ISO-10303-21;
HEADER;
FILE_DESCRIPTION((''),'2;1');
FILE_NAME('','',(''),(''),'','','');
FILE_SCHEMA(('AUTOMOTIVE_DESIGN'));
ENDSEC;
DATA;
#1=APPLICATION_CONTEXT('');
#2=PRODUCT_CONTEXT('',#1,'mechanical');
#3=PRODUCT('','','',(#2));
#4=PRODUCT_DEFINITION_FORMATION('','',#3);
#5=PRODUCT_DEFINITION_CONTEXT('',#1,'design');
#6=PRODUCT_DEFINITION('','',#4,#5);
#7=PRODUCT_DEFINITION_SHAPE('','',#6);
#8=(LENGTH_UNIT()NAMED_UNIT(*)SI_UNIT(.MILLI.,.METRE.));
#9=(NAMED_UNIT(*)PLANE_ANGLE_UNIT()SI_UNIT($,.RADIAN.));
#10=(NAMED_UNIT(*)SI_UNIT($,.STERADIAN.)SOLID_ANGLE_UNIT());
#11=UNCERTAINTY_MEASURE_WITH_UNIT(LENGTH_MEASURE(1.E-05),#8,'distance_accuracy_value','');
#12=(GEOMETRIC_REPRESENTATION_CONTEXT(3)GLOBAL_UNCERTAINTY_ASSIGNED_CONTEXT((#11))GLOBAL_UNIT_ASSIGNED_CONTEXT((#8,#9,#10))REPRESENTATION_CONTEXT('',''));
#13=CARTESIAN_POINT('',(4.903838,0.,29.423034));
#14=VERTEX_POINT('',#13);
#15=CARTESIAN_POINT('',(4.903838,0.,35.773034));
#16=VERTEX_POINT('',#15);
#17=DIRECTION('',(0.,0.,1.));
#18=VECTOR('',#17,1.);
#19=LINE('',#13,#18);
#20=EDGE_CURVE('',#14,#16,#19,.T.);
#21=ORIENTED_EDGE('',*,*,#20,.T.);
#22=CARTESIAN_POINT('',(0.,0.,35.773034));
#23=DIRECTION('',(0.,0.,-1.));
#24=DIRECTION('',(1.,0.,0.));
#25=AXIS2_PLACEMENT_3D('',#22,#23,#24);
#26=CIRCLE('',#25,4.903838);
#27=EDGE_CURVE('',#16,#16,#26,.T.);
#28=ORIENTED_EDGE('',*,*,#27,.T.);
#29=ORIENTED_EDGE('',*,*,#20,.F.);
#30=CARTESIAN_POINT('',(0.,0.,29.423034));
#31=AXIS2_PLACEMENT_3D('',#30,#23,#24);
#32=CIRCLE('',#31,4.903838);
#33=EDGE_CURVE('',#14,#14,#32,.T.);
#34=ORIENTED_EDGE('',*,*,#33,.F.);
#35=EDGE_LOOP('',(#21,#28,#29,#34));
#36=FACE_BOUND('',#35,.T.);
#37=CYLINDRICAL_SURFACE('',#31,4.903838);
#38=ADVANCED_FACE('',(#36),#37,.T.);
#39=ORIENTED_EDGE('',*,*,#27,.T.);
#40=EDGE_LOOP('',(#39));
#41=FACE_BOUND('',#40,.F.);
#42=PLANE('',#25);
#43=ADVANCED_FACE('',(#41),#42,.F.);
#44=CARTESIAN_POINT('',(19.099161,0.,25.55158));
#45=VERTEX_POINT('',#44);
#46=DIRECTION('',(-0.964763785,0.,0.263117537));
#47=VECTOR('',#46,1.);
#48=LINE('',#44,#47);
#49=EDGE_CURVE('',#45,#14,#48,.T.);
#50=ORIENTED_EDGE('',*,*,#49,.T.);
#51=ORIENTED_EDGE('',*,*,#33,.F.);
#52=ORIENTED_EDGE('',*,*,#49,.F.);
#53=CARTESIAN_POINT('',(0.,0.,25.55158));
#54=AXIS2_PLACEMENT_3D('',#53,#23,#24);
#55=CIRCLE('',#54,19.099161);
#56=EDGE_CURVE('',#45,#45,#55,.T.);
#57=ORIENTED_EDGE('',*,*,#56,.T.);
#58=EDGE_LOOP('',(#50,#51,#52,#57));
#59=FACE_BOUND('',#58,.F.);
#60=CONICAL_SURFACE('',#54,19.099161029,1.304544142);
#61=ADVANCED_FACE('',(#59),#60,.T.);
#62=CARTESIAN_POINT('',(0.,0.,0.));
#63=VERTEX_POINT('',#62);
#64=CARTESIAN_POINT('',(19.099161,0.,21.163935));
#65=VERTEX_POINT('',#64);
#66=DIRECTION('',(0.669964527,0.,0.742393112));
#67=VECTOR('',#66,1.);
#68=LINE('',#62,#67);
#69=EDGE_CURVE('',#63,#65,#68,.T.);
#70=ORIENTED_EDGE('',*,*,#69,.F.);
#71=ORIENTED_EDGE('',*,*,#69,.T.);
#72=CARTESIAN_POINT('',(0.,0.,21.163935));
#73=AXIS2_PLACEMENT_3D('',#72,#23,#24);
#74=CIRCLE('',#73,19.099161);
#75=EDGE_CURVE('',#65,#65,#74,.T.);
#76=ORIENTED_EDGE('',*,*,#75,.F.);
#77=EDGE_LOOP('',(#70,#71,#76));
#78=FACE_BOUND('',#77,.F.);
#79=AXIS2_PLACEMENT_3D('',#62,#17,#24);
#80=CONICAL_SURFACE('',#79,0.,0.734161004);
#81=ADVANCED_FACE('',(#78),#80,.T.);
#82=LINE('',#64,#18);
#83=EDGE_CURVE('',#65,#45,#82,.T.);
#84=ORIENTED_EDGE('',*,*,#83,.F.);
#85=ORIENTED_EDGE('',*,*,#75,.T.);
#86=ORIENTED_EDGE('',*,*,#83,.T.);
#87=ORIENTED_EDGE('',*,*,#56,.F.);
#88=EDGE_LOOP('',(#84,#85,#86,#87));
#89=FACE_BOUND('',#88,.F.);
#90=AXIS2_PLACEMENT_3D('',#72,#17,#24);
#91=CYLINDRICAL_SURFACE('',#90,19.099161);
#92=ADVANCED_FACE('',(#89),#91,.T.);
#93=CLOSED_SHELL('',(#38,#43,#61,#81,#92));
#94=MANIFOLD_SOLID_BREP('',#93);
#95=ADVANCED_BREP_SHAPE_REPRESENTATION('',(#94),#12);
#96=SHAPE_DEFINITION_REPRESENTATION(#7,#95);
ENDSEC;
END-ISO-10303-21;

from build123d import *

# Parameters (mm, degrees)
F2_DEPTH = 6.35


# Not quite as in the source:
# - the program builds the solid bodies; features that only make, move or delete a surface that nothing else refers to are left out


with BuildPart() as f1:
    # F0 (on Front) → F1 (revolve)
    with BuildSketch(Plane.XZ):
        Polygon((0, 29.4230338186), (0, 0), (19.0991610289, 21.1639348418), (19.0991610289, 25.5515798926), (4.9038375728, 29.4230338186), align=None)
    revolve(axis=Axis((0, 0, 14.7115169093), (0, 0, -1)))

    # F2 (add): a face of the model
    f2_faces = [f1.faces().sort_by_distance(p)[0] for p in [
        (0, 0, 29.4230338186),
    ]]
    extrude(f2_faces, amount=F2_DEPTH)


solid = f1.part
